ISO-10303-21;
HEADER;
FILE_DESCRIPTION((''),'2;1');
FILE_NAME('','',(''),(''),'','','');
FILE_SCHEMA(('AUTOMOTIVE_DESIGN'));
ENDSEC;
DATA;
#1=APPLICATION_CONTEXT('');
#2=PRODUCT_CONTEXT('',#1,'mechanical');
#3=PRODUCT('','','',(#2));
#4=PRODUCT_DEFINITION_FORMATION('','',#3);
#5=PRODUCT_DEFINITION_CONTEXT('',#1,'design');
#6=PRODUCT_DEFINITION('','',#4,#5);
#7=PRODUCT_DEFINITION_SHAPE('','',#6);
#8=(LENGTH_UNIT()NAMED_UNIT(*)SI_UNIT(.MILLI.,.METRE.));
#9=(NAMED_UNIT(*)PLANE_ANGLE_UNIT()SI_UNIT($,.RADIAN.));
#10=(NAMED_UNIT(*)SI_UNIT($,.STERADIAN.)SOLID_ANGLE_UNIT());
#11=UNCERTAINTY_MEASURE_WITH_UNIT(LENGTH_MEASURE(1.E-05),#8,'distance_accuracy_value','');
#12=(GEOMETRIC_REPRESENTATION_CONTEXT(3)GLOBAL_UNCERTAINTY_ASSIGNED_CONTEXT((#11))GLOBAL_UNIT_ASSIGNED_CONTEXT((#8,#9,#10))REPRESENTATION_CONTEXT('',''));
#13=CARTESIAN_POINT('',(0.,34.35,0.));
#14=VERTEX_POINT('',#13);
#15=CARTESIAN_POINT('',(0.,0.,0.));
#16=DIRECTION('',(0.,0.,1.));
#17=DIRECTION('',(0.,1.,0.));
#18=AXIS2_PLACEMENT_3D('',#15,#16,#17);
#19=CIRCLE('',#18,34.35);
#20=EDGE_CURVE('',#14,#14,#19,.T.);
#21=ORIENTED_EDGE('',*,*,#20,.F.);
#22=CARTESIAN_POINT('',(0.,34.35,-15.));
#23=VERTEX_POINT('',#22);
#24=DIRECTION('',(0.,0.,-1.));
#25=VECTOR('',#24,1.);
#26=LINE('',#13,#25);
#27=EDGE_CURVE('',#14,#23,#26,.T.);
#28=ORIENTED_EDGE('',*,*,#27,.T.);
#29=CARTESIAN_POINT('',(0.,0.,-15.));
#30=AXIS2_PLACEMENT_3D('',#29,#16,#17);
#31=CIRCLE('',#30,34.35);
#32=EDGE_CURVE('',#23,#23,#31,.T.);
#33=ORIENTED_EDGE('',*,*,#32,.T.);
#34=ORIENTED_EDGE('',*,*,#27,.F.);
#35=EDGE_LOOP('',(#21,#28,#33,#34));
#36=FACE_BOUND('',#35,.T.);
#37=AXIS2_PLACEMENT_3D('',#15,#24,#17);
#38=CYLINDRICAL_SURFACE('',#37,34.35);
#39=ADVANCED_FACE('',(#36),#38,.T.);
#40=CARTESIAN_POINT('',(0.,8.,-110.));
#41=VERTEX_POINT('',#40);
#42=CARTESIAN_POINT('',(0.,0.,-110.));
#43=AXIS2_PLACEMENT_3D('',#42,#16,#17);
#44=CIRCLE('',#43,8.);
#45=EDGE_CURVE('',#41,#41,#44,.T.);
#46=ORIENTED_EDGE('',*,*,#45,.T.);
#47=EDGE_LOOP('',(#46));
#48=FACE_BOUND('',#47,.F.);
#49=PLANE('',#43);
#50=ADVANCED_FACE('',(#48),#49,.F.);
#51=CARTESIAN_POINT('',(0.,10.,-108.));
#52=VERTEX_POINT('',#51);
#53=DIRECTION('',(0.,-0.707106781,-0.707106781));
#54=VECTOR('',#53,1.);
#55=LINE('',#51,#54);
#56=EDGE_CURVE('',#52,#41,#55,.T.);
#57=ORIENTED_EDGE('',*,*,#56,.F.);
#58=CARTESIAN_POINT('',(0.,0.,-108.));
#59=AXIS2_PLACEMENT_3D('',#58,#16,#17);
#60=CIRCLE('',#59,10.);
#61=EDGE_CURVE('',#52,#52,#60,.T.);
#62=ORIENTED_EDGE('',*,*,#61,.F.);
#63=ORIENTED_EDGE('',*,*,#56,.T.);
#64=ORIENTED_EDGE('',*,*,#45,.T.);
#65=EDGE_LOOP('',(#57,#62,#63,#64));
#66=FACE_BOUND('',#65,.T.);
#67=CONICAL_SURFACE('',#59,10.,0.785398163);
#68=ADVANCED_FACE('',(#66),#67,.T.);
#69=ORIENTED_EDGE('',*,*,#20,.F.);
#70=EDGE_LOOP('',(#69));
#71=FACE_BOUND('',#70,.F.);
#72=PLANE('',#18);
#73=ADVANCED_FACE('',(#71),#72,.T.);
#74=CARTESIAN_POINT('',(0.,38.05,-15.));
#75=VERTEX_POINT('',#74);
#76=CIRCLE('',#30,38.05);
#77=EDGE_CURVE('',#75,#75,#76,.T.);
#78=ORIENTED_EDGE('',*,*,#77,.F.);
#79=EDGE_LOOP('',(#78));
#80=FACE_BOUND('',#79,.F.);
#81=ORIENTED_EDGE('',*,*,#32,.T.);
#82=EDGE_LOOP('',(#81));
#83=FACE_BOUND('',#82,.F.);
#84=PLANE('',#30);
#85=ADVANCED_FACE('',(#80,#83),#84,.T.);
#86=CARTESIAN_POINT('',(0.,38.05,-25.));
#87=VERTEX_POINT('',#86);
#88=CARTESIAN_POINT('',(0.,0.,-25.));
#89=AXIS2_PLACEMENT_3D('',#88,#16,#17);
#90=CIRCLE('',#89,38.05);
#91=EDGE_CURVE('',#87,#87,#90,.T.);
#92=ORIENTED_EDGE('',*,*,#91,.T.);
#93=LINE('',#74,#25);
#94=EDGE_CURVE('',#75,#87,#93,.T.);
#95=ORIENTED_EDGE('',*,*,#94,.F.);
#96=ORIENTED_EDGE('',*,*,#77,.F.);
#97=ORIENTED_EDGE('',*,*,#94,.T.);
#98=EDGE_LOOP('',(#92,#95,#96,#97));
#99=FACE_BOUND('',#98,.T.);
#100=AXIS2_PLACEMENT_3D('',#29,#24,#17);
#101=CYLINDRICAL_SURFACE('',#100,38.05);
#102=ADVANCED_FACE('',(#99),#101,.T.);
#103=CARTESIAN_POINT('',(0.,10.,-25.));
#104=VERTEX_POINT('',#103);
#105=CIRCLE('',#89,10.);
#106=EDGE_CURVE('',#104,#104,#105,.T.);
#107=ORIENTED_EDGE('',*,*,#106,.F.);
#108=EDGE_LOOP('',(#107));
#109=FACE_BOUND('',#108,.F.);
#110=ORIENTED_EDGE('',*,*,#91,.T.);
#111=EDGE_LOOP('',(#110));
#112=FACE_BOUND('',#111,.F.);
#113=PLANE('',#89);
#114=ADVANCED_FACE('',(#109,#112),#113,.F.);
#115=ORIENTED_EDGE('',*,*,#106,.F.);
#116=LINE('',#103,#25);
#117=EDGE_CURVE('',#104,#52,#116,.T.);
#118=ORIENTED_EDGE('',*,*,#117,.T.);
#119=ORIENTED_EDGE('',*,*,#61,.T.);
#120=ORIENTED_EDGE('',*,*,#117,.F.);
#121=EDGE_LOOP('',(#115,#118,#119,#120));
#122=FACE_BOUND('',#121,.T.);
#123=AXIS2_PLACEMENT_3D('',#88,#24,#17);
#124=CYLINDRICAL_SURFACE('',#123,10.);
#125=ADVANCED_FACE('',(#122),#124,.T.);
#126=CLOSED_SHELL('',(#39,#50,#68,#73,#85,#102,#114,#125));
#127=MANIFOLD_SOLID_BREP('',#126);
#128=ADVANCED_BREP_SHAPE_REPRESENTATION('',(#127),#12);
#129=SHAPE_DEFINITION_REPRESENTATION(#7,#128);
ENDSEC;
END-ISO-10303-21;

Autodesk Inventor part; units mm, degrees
ref_plane "YZ Plane" through (0, 0, 0) normal (1, 0, 0) x (0, 1, 0)
ref_plane "XZ Plane" through (0, 0, 0) normal (0, 1, 0) x (-1, 0, 0)
ref_plane "XY Plane" through (0, 0, 0) normal (0, 0, 1) x (1, 0, 0)
sketch "Skizze1" plane through (0, 0, 0) normal (1, 0, 0) x (0, 1, 0)
  line L0 (0, -29.1045) -> (0, 0)
  line L1 (0, 0) -> (0, -20.5338)
  line L2 (0, 0) -> (34.35, 0)
  line L3 (34.35, 0) -> (34.35, -15)
  line L4 (34.35, -15) -> (38.05, -15)
  line L5 (38.05, -15) -> (38.05, -25)
  line L6 (38.05, -25) -> (10, -25)
  line L7 (10, -25) -> (10, -110)
  line L8 (10, -110) -> (0, -110)
  line L9 (0, 0) -> (0, -24.283)
  line L10 (34.35, 0) -> (0, 0)
  line L11 (0, -132) -> (0, 22) projected
  line L12 (0, -110) -> (0, 0)
  dimension "d0" = 15
  dimension "d1" = 25
  dimension "d2" = 76.1
  dimension "d3" = 68.7
  dimension "d4" = 20
  dimension "d6" = 85
revolve "Umdrehung1" add sketch "Skizze1" angle 360 about axis through (0, 0, -110) along (0, 0, 1)
thread "Gewinde1" size "M20x2.5" class "6g" standard "ANSI Metric M Profile" length 25
chamfer "Fase1" distance 2 angle 45 1 edges at (0, -10, -110)
properties part number "Rad Aufnahme" material "Stahl"
